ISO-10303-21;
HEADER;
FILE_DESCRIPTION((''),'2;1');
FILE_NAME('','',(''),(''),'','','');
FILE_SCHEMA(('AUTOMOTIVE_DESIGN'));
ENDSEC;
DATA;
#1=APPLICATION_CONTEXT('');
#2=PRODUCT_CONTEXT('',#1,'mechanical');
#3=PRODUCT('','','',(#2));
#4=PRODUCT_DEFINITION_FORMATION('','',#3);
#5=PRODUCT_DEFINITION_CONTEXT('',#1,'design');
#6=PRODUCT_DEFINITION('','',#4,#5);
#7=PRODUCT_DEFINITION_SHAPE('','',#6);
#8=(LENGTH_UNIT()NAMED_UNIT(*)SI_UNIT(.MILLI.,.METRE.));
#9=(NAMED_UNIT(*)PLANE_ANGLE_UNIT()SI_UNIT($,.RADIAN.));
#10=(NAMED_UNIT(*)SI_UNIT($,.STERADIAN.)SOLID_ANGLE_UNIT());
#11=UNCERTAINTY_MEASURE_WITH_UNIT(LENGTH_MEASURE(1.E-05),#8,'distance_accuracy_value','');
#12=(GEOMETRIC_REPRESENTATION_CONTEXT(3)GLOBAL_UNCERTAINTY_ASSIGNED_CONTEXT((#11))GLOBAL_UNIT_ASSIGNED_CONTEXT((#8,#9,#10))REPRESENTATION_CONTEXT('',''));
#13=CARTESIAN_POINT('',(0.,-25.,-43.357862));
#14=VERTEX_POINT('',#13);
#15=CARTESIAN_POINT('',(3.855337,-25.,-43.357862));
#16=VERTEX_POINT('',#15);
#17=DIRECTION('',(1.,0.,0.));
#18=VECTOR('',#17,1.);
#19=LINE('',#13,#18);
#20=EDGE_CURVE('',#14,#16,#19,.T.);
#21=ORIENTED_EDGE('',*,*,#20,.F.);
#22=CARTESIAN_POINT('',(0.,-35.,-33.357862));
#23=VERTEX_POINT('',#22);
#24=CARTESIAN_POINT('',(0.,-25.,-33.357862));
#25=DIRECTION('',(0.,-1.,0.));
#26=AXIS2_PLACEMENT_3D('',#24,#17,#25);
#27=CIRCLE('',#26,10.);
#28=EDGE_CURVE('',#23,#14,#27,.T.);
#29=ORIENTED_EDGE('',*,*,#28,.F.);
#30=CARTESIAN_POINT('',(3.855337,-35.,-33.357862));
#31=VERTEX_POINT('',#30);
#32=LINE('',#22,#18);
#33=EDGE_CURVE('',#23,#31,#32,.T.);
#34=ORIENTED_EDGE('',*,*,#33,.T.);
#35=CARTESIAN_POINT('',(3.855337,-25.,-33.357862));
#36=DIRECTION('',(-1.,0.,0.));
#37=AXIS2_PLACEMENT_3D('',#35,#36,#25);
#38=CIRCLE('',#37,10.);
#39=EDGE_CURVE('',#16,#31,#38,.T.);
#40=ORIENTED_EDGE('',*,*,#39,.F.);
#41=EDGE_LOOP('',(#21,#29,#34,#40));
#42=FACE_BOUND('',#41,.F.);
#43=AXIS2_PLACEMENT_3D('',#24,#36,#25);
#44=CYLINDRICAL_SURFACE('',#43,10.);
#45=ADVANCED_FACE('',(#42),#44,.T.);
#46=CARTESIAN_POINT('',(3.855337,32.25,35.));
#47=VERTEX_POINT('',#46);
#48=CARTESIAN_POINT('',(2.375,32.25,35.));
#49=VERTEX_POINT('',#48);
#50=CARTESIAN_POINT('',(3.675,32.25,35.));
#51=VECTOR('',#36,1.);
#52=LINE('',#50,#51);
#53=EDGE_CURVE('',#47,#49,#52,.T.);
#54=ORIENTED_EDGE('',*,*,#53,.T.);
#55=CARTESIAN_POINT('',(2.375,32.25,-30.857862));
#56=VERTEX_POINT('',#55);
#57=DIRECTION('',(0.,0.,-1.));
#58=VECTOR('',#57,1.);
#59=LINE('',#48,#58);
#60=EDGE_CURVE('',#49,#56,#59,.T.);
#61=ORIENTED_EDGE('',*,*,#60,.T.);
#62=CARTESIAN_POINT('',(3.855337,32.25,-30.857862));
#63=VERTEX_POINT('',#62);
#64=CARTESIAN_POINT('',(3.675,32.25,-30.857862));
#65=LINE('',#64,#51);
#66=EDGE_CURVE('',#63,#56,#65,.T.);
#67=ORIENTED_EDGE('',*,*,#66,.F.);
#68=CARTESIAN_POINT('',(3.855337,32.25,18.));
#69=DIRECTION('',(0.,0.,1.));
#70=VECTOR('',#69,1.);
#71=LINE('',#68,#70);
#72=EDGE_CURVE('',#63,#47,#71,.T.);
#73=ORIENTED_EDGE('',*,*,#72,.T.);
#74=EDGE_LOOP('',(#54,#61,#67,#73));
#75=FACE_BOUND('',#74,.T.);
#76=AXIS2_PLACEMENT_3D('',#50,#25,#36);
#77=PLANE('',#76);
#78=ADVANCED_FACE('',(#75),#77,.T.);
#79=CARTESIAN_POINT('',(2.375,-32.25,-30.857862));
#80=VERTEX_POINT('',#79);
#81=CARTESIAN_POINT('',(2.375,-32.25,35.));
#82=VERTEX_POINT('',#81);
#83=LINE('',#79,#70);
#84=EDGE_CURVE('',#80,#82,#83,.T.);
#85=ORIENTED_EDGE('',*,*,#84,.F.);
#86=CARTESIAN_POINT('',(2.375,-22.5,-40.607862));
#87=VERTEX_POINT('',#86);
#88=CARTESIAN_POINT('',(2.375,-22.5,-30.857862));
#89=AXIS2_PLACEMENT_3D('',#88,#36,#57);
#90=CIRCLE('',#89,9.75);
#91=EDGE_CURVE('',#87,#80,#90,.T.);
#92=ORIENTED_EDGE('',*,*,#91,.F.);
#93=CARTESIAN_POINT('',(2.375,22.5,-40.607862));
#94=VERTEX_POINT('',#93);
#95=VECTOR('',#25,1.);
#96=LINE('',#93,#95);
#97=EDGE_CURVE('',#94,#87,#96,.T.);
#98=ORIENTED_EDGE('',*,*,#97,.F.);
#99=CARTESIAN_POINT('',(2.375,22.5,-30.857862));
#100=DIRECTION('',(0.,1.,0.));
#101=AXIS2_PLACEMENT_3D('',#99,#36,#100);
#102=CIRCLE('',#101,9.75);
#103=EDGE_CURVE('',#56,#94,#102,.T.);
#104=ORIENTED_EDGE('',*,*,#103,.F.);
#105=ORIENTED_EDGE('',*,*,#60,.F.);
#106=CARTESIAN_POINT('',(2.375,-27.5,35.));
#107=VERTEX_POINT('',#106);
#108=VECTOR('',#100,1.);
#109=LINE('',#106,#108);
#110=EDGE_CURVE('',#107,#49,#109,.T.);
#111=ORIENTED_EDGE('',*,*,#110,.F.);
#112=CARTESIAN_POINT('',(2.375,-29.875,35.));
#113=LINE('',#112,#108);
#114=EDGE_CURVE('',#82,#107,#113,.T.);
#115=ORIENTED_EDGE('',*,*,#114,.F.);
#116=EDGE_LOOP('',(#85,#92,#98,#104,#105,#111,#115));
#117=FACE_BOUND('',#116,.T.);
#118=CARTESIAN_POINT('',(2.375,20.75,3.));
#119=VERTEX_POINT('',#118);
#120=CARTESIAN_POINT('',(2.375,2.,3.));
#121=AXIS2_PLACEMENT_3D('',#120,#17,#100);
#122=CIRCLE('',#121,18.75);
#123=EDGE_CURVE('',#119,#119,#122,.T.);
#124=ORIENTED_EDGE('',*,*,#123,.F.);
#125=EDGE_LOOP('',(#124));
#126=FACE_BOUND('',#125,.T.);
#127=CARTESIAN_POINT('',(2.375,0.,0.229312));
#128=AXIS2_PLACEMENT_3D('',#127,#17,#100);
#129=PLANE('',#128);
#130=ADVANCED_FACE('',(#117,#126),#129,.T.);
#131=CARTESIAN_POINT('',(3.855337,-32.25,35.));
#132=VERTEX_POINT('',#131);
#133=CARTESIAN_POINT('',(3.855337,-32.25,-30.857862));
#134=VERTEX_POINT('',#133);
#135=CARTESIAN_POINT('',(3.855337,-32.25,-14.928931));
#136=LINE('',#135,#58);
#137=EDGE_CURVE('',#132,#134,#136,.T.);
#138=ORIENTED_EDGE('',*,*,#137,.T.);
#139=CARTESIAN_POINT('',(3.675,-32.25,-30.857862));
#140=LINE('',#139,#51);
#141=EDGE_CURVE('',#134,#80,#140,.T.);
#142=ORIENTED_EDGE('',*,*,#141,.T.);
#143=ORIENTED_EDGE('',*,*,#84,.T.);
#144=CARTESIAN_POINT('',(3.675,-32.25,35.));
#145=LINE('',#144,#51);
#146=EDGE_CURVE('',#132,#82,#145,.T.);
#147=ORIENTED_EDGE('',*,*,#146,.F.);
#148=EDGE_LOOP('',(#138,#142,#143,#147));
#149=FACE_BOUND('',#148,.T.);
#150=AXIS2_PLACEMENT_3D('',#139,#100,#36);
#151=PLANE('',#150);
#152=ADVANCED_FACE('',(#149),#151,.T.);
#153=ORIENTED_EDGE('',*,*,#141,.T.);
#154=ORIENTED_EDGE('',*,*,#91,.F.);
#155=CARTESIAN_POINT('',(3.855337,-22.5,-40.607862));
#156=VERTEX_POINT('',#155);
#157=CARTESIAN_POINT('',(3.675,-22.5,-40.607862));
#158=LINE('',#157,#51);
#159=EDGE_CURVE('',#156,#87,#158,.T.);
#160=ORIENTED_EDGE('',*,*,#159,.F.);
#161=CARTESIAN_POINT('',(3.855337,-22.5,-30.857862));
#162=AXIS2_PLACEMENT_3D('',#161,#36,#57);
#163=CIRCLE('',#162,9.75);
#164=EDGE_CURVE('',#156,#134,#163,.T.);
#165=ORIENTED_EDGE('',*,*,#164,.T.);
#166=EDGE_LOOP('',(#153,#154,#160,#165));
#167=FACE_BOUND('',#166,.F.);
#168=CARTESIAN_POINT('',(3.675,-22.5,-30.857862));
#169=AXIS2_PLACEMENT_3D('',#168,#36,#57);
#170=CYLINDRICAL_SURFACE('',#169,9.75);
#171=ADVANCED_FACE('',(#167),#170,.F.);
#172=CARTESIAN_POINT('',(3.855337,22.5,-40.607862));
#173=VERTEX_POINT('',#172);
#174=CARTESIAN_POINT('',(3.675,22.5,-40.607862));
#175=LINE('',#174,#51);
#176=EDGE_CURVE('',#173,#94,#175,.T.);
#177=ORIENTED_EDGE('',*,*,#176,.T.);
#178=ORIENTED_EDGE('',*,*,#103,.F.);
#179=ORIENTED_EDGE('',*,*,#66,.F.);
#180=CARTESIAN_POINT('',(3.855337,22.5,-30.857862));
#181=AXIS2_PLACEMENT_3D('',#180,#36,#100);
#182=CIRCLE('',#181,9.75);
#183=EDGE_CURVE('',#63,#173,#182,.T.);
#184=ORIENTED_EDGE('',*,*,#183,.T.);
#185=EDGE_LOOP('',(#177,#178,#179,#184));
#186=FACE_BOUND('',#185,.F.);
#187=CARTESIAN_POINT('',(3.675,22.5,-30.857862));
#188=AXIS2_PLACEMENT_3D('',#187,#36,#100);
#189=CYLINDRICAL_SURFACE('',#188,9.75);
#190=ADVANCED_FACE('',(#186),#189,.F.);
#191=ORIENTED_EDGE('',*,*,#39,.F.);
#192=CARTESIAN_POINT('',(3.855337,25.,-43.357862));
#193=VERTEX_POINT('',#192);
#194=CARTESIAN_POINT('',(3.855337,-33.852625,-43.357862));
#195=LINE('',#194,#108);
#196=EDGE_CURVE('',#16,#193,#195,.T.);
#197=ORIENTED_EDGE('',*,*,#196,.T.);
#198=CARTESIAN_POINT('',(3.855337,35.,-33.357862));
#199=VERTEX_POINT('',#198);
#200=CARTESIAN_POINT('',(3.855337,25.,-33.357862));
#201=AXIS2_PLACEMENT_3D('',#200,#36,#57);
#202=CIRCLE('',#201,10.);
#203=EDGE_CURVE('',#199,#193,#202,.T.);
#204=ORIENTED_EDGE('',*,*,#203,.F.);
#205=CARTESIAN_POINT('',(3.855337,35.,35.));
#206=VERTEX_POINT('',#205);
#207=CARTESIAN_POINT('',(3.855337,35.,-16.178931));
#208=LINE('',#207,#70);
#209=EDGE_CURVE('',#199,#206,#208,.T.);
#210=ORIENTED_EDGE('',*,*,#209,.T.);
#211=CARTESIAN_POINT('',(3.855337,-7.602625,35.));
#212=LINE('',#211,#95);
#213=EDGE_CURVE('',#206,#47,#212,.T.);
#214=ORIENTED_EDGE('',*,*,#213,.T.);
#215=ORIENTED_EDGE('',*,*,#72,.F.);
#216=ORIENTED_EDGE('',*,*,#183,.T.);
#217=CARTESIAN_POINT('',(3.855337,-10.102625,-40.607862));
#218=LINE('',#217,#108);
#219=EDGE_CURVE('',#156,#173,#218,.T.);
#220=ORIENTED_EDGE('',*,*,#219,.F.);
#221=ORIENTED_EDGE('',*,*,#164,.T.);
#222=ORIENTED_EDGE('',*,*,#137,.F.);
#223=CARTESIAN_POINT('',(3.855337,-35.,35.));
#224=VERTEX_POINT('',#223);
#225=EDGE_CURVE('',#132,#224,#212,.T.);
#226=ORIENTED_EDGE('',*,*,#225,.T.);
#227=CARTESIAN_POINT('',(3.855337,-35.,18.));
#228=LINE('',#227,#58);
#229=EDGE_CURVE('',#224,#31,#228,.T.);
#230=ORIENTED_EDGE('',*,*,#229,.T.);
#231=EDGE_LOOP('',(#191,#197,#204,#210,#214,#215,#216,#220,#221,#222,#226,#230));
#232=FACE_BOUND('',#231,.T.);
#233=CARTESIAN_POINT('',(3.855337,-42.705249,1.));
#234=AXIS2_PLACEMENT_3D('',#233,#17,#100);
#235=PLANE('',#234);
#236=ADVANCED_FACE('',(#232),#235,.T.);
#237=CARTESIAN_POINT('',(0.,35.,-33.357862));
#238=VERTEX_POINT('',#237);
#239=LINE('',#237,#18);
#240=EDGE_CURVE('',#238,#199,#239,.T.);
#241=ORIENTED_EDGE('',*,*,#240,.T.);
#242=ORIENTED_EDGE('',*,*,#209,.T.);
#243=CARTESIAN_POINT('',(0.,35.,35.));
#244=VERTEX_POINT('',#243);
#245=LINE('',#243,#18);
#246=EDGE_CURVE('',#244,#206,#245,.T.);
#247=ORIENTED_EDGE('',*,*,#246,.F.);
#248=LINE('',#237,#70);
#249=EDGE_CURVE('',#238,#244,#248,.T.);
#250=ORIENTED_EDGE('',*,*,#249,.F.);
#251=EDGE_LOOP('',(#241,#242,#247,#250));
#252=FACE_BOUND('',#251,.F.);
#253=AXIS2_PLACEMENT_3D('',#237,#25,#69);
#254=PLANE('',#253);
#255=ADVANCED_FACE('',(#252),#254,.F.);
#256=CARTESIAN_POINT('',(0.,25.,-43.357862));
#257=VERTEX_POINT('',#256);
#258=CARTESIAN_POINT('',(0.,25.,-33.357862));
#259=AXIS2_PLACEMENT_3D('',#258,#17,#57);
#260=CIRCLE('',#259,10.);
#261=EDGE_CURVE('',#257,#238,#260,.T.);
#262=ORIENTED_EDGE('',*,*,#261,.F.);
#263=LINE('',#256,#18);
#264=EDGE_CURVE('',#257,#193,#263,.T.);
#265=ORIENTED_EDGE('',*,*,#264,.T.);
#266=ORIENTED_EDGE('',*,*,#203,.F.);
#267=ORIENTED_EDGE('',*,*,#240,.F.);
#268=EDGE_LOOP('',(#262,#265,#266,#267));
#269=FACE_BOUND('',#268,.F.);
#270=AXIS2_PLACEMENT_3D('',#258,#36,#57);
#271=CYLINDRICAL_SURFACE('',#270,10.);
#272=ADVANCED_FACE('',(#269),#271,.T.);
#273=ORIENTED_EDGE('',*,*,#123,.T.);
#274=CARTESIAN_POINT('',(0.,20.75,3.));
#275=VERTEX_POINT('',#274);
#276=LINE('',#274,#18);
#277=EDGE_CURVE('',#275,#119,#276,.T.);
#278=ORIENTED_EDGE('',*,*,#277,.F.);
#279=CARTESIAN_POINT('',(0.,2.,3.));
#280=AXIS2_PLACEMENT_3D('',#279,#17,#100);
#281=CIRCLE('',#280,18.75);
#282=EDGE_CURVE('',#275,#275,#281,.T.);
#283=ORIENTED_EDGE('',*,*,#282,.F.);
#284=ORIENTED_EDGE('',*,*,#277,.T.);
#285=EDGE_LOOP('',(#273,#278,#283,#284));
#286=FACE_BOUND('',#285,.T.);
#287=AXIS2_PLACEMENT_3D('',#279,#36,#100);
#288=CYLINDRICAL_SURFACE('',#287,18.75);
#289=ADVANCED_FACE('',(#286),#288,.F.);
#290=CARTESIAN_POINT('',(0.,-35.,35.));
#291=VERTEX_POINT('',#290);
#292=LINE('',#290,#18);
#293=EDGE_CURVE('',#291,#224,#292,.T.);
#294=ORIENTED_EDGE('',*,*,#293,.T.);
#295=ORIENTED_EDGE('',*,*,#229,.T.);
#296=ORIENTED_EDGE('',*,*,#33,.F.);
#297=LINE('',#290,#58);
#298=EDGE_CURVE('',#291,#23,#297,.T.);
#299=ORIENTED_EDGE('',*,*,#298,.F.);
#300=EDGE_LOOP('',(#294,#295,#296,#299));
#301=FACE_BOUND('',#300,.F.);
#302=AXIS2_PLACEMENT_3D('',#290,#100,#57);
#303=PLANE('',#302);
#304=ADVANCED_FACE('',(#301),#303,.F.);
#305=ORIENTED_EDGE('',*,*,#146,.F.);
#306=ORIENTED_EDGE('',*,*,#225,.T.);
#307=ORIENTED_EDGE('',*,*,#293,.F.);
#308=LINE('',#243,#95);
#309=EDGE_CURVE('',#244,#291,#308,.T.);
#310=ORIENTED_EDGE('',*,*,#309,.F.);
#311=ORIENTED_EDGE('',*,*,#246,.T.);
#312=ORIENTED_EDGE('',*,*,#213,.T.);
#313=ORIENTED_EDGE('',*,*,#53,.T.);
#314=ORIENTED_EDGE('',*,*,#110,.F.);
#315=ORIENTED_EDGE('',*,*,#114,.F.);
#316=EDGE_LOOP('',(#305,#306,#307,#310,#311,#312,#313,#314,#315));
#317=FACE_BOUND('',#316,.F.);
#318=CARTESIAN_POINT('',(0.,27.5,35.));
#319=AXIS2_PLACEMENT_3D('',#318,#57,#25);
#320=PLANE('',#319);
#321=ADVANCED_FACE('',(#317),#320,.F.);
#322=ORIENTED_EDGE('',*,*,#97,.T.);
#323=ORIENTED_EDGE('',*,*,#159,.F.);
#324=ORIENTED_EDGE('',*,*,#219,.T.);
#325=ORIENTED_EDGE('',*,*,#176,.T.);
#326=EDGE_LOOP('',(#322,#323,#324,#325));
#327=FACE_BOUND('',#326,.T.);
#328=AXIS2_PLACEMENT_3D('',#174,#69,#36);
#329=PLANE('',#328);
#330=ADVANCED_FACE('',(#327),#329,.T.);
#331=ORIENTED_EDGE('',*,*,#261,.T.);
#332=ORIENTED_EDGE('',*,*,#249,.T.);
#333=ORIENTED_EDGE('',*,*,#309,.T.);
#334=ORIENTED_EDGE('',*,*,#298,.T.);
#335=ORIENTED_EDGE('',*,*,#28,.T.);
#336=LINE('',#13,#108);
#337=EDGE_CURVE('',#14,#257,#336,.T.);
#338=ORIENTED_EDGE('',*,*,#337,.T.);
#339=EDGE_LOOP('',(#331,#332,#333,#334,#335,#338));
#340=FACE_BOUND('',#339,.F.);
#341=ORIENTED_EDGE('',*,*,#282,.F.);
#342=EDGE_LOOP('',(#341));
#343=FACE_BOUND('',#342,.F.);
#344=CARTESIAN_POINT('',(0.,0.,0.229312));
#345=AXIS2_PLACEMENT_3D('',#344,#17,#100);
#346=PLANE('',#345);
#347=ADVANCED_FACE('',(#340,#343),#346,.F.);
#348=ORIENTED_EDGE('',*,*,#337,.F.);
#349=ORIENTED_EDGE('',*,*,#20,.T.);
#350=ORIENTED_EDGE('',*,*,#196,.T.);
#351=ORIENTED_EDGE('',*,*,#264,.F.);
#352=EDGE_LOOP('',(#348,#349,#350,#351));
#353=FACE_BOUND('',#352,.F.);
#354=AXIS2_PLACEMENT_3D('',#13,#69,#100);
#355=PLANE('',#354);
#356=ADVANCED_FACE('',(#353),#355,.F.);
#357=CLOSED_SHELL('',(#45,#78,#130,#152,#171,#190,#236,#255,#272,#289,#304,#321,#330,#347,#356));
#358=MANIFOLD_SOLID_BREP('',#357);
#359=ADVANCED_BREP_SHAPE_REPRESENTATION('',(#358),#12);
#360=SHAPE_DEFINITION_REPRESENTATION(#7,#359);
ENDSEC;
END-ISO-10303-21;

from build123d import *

# Parameters (mm, degrees)
F1_DEPTH  = 7.5
F2_W      = 2.6
F2_H      = 4.75
F0_R      = 18.75
F4_DEPTH  = 2.375
F8_R      = 4
F9_W      = 29.1621480137
F9_H      = 87.7830125391
F9_W_2    = 6.8209778983
F10_DEPTH = 60.1


# Not quite as in the source:
# - a feature names something its author has since deleted; it is built from what else it names


with BuildPart() as f1:
    # F0 (on Right) → F1 (new body)
    with BuildSketch(Plane.YZ):
        with BuildLine():
            Line((-27.5, -30.8578620553), (-27.5, 35))
            Line((-27.5, 35), (-35, 35))
            Line((-35, 35), (-35, -33.3578620553))
            ThreePointArc((-35, -33.3578620553), (-32.0710678119, -40.4289298672), (-25, -43.3578620553))
            Line((-25, -43.3578620553), (25, -43.3578620553))
            ThreePointArc((25, -43.3578620553), (32.0710678119, -40.4289298672), (35, -33.3578620553))
            Line((35, -33.3578620553), (35, 35))
            Line((35, 35), (27.5, 35))
            Line((27.5, 35), (27.5, -30.8578620553))
            ThreePointArc((27.5, -30.8578620553), (26.0355339059, -34.3933959612), (22.5, -35.8578620553))
            Line((22.5, -35.8578620553), (-22.5, -35.8578620553))
            ThreePointArc((-22.5, -35.8578620553), (-26.0355339059, -34.3933959612), (-27.5, -30.8578620553))
        make_face()
    extrude(amount=F1_DEPTH)

    # F3: sweep along a path in F0
    with BuildLine(Plane.YZ) as f3_path:
        Line((27.5, 35), (27.5, -30.8578620553))
        ThreePointArc((27.5, -30.8578620553), (26.0355339059, -34.3933959612), (22.5, -35.8578620553))
        Line((22.5, -35.8578620553), (-22.5, -35.8578620553))
        ThreePointArc((-22.5, -35.8578620553), (-26.0355339059, -34.3933959612), (-27.5, -30.8578620553))
        Line((-27.5, -30.8578620553), (-27.5, 35))
    # F2 (on face) → F3 (sweep, cut)
    with BuildSketch(Plane.XY.offset(35)):
        with Locations((3.675, 29.875)):
            Rectangle(F2_W, F2_H)
    sweep(path=f3_path.line, mode=Mode.SUBTRACT)

    # F0 (on Right) → F4 (join)
    with BuildSketch(Plane.YZ):
        with BuildLine():
            Line((27.5, 35), (-27.5, 35))
            Line((-27.5, 35), (-27.5, -30.8578620553))
            ThreePointArc((-27.5, -30.8578620553), (-26.0355339059, -34.3933959612), (-22.5, -35.8578620553))
            Line((-22.5, -35.8578620553), (22.5, -35.8578620553))
            ThreePointArc((22.5, -35.8578620553), (26.0355339059, -34.3933959612), (27.5, -30.8578620553))
            Line((27.5, -30.8578620553), (27.5, 35))
        make_face()
        with Locations((2, 3)):
            Circle(F0_R, mode=Mode.SUBTRACT)
    extrude(amount=F4_DEPTH)

    # F6 (on offset) → F7 (revolve)
    with BuildSketch(Plane.XY.offset(1)):
        Polygon((0, 22), (0, 25), (-22.6, 35), (-22.6, 32), align=None)
    revolve(axis=Axis((0, 2, 3), (1, 0, 0)))

    # F8
    f8_edges = [f1.edges().sort_by_distance(p)[0] for p in [
        (6.2375, -27.5, 35),
        (6.2375, 27.5, 35),
    ]]
    fillet(f8_edges, radius=F8_R)

    # F9 (on offset) → F10 (cut, symmetric)
    with BuildSketch(Plane.XY.offset(1)):
        with Locations((-14.5810740069, 1.1862572283)):
            Rectangle(F9_W, F9_H)
        with Locations((7.2658261051, 1.1862572283)):
            Rectangle(F9_W_2, F9_H)
    extrude(amount=F10_DEPTH, both=True, mode=Mode.SUBTRACT)


solid = f1.part
